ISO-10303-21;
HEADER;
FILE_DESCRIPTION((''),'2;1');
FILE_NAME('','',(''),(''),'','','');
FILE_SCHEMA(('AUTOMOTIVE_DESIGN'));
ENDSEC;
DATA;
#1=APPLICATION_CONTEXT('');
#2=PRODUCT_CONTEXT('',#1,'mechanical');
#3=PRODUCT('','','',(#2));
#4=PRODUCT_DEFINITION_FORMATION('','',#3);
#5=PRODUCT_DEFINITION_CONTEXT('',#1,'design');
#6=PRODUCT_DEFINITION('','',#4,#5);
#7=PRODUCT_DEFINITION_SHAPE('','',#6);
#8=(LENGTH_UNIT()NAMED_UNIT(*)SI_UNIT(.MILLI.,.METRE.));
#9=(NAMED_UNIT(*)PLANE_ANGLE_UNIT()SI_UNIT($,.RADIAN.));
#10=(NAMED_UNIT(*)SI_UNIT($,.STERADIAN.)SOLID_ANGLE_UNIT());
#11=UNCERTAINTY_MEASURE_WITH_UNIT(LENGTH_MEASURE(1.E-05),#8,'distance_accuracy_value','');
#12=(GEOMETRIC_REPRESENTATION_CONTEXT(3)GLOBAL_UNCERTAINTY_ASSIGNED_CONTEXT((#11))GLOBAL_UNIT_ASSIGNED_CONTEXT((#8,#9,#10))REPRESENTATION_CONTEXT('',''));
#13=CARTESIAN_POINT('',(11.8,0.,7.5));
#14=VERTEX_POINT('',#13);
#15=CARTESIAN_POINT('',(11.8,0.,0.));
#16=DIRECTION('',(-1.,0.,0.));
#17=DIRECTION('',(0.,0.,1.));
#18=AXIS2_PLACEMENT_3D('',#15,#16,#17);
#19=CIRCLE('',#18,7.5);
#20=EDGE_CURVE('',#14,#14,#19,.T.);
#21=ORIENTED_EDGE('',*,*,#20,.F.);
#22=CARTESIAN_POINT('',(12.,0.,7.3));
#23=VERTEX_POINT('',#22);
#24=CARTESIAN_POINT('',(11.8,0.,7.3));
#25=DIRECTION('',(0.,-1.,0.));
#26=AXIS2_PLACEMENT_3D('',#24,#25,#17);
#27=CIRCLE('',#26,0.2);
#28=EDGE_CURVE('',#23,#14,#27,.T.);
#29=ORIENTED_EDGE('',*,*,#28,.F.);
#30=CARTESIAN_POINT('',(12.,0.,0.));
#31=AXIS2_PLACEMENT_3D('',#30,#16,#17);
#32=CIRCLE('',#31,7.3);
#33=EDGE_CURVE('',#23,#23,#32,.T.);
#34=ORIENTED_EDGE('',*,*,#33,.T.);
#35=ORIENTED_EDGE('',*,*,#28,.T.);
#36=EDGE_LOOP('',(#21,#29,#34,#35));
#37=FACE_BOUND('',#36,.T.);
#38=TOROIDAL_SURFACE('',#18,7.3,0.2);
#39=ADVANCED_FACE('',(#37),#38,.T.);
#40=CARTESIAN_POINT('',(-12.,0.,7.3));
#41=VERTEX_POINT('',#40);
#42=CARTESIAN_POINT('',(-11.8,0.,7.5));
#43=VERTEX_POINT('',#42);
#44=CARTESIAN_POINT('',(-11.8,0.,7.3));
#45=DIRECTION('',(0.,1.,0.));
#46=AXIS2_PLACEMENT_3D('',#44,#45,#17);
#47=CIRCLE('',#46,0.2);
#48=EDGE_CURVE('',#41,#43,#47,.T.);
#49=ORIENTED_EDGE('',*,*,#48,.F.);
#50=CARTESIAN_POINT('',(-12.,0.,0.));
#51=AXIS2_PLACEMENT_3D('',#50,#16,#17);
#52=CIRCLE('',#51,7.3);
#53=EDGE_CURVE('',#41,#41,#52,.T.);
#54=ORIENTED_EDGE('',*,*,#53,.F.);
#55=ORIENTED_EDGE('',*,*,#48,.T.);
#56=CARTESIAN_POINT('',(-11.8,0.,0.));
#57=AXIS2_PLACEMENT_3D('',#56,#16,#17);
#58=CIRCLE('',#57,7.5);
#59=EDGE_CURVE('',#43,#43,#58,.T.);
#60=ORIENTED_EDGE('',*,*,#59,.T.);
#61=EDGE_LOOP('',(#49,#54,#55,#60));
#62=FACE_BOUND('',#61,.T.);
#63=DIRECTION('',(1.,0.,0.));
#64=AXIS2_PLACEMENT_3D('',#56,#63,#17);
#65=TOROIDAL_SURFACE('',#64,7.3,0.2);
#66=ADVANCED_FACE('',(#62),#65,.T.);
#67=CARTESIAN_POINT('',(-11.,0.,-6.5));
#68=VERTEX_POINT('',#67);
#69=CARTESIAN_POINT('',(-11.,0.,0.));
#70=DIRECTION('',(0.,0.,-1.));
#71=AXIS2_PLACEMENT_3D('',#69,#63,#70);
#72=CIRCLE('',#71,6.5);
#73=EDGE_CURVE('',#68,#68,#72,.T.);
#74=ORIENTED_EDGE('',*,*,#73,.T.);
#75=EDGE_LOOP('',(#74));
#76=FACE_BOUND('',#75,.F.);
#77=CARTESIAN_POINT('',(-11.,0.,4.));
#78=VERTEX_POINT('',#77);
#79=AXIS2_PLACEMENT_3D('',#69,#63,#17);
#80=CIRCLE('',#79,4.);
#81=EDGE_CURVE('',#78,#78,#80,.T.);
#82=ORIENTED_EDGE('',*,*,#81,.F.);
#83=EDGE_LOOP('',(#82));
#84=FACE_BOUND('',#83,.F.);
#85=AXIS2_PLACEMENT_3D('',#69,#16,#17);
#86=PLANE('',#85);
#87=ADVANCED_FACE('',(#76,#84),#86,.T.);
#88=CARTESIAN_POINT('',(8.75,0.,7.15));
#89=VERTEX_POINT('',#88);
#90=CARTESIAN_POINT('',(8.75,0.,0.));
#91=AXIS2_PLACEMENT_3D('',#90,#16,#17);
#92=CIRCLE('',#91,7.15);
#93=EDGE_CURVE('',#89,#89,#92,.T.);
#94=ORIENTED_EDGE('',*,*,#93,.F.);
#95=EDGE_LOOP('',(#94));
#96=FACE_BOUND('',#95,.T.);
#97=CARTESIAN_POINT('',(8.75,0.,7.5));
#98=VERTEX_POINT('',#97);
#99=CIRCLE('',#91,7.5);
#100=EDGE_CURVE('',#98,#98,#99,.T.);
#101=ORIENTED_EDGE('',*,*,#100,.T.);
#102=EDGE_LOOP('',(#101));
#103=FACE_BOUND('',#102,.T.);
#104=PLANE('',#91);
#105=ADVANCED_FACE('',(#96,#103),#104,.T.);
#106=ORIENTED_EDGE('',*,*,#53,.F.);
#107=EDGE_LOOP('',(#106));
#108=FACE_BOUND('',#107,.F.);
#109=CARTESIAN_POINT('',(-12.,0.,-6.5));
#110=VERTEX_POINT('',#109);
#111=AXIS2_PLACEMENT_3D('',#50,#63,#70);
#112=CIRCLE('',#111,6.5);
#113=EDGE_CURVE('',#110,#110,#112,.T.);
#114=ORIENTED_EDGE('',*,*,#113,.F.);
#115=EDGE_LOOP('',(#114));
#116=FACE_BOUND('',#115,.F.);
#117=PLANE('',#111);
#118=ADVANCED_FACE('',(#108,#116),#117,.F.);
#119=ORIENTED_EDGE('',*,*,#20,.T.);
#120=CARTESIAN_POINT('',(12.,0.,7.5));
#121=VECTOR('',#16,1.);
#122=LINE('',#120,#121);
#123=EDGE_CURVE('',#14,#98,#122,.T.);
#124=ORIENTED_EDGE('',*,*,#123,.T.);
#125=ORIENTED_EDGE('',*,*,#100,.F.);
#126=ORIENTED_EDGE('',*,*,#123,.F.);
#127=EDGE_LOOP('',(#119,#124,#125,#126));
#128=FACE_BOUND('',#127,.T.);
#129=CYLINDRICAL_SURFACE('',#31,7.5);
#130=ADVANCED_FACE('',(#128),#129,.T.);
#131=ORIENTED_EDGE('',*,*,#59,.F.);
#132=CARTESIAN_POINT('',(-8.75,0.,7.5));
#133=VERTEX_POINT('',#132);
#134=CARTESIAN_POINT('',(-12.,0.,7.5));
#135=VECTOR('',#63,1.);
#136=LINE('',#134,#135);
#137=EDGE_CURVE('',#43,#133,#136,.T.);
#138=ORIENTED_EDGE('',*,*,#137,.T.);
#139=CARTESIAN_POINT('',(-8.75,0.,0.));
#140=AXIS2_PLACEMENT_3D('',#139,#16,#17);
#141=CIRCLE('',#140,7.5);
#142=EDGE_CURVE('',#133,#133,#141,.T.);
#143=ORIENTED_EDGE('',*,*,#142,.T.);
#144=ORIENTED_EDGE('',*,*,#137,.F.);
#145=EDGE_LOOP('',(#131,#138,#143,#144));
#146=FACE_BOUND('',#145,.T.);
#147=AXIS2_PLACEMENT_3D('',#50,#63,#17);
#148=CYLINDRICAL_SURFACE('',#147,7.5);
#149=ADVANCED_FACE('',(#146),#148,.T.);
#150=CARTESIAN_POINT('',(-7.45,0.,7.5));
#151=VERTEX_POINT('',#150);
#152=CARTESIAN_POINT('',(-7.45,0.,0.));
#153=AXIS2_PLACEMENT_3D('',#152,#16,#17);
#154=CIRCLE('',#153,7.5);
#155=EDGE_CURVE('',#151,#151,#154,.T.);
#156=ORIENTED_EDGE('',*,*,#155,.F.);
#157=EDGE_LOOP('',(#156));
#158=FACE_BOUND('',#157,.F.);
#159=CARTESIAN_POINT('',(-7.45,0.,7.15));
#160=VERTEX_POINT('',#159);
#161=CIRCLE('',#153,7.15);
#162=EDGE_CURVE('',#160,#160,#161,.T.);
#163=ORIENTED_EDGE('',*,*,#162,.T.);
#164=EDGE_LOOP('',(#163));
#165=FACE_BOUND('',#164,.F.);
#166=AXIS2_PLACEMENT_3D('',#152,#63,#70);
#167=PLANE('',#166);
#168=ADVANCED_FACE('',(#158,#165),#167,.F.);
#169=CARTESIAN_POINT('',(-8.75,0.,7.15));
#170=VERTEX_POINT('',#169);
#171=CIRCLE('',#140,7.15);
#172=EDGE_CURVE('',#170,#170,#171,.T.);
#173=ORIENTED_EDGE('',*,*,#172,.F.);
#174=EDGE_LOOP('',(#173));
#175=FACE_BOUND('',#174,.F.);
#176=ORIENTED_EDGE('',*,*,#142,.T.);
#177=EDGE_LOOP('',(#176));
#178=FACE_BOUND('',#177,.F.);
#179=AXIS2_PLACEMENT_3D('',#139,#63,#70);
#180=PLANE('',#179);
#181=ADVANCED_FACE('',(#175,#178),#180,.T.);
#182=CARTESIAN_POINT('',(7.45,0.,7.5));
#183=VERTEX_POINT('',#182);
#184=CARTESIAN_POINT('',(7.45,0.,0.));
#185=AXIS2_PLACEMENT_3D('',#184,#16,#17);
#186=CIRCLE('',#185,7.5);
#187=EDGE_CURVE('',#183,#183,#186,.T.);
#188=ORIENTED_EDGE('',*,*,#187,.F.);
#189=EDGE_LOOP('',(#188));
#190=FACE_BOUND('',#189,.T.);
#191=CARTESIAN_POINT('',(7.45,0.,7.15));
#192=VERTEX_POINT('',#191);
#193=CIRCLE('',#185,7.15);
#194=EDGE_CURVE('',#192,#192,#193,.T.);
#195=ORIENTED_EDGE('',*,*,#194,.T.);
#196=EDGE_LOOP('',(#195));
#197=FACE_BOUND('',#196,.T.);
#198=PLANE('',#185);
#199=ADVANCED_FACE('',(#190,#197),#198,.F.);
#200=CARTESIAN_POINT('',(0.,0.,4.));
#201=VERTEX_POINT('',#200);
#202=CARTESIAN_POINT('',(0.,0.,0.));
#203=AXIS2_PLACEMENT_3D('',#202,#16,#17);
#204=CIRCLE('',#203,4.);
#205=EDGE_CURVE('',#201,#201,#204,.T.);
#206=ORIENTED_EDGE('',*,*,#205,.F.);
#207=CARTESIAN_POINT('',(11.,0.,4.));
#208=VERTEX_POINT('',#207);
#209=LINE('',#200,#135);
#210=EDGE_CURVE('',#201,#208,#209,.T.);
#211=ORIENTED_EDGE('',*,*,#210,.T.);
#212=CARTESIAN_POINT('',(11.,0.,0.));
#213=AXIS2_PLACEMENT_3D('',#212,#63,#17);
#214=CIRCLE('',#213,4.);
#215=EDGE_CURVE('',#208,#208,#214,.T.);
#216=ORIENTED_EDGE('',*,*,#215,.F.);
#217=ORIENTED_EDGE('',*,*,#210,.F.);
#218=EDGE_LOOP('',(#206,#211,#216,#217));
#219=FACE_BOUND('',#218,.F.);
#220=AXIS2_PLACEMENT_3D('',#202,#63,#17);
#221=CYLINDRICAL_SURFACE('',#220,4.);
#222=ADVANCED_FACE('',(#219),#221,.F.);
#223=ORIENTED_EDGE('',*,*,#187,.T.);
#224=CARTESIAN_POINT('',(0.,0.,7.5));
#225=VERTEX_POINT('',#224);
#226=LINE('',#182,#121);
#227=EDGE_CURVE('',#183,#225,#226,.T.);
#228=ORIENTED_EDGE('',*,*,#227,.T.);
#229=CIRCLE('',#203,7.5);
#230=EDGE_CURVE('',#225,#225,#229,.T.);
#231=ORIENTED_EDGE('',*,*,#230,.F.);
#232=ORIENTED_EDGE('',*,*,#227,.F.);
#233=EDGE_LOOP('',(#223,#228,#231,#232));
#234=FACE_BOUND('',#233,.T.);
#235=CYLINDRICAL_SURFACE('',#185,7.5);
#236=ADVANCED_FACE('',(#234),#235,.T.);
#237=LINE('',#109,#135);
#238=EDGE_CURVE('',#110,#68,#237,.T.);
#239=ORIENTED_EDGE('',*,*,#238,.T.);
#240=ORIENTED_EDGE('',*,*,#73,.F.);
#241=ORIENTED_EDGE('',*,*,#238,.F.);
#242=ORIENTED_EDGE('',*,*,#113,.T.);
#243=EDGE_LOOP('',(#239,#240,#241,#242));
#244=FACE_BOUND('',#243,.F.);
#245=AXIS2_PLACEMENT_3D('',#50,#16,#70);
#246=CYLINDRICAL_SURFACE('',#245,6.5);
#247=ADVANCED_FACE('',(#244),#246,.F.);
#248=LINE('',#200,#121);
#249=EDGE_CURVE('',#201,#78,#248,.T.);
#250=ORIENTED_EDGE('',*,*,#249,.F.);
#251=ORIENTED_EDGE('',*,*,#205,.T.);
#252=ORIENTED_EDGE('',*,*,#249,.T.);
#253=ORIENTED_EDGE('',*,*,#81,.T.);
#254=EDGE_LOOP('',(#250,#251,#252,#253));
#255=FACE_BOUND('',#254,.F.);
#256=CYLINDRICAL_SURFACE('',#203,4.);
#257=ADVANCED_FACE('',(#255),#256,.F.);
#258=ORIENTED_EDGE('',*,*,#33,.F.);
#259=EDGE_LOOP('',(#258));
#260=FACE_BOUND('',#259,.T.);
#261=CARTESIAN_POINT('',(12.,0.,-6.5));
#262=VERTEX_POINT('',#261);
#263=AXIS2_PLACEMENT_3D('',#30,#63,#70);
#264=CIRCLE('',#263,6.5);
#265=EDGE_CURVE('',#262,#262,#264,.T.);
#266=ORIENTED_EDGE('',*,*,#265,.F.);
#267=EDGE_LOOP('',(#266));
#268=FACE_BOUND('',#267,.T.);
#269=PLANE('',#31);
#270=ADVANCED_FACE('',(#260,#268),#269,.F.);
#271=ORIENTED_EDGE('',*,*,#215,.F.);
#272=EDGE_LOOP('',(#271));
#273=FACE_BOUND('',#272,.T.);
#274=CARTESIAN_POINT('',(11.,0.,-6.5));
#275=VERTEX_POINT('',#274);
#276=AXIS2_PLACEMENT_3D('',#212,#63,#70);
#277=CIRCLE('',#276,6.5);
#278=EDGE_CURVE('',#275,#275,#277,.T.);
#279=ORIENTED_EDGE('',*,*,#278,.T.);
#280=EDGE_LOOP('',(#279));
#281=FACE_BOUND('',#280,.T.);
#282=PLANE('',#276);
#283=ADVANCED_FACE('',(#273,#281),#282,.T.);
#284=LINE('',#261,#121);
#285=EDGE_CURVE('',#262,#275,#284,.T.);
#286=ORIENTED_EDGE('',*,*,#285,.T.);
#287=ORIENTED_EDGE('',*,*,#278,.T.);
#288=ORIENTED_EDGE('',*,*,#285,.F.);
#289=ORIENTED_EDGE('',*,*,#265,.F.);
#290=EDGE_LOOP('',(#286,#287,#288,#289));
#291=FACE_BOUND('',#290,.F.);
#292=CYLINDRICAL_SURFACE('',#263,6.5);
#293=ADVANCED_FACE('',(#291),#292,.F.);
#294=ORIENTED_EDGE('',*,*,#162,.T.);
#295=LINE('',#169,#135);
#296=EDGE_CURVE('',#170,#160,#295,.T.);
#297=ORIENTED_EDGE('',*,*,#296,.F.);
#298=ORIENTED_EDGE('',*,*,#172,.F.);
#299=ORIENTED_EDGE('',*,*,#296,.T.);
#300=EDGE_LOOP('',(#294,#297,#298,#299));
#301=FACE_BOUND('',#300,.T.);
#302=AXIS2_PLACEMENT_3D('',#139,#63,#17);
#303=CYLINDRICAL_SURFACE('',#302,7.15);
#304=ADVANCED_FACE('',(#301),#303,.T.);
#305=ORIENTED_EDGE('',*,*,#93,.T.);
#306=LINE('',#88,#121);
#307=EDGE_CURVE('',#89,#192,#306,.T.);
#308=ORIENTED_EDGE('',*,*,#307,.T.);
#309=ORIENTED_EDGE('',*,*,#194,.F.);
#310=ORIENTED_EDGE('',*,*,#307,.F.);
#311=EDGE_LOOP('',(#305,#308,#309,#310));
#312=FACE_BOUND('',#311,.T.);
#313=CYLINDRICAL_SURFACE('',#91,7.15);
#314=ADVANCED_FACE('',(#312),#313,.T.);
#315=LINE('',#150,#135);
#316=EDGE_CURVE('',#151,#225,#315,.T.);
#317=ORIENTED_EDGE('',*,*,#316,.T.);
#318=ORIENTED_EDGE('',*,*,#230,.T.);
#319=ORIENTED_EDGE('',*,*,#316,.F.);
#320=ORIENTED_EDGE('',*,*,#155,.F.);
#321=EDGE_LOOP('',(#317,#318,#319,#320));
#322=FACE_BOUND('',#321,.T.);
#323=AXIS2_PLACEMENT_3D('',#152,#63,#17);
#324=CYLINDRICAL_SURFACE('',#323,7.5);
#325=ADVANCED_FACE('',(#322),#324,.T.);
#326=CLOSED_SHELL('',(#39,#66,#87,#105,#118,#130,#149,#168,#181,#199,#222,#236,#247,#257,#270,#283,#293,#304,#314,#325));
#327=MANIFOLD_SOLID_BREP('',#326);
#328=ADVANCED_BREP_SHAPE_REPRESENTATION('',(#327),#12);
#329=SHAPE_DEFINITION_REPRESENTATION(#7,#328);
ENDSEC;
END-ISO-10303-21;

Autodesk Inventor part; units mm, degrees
ref_plane "YZ Plane" through (0, 0, 0) normal (1, 0, 0) x (0, 1, 0)
ref_plane "XZ Plane" through (0, 0, 0) normal (0, 1, 0) x (-1, 0, 0)
ref_plane "XY Plane" through (0, 0, 0) normal (0, 0, 1) x (1, 0, 0)
sketch "Schizzo1" plane through (0, 0, 0) normal (0, 1, 0) x (-1, 0, 0)
  line L0 (-12, 4) -> (-12, 7.5)
  line L1 (-12, 7.5) -> (-8.75, 7.5)
  line L2 (-8.75, 7.5) -> (-8.75, 7.15)
  line L3 (-8.75, 7.15) -> (-7.45, 7.15)
  line L4 (-7.45, 7.15) -> (-7.45, 7.5)
  line L5 (-7.45, 7.5) -> (0, 7.5)
  line L6 (0, 7.5) -> (0, 4)
  line L7 (0, 4) -> (-12, 4)
  line L8 (0, 0) -> (5.7518, 0)
  dimension "d0" = 8
  dimension "d2" = 15
  dimension "d3" = 12
  dimension "d4" = 8.75
  dimension "d5" = 1.3
  dimension "d6" = 14.3
revolve "Rivoluzione1" add sketch "Schizzo1" angle 360 about axis through (0, 0, 0) along (-1, 0, 0)
fillet "Raccordo1" radius 0.2 1 edges at (12, 0, -7.5)
sketch "Schizzo2" plane through (12, 0, 0) normal (1, 0, 0) x (0, 0, -1)
  circle A0 centre (0, 0) radius 7.3 projected
  circle A1 centre (0, 0) radius 6.5
  dimension "d13" = 13
extrude "Estrusione2" cut sketch "Schizzo2" against normal blind 1 contours A1
mirror "Specchio1" about plane through (0, 0, 5.75) normal (-1, 0, 0)
properties part number "LM8UU"
